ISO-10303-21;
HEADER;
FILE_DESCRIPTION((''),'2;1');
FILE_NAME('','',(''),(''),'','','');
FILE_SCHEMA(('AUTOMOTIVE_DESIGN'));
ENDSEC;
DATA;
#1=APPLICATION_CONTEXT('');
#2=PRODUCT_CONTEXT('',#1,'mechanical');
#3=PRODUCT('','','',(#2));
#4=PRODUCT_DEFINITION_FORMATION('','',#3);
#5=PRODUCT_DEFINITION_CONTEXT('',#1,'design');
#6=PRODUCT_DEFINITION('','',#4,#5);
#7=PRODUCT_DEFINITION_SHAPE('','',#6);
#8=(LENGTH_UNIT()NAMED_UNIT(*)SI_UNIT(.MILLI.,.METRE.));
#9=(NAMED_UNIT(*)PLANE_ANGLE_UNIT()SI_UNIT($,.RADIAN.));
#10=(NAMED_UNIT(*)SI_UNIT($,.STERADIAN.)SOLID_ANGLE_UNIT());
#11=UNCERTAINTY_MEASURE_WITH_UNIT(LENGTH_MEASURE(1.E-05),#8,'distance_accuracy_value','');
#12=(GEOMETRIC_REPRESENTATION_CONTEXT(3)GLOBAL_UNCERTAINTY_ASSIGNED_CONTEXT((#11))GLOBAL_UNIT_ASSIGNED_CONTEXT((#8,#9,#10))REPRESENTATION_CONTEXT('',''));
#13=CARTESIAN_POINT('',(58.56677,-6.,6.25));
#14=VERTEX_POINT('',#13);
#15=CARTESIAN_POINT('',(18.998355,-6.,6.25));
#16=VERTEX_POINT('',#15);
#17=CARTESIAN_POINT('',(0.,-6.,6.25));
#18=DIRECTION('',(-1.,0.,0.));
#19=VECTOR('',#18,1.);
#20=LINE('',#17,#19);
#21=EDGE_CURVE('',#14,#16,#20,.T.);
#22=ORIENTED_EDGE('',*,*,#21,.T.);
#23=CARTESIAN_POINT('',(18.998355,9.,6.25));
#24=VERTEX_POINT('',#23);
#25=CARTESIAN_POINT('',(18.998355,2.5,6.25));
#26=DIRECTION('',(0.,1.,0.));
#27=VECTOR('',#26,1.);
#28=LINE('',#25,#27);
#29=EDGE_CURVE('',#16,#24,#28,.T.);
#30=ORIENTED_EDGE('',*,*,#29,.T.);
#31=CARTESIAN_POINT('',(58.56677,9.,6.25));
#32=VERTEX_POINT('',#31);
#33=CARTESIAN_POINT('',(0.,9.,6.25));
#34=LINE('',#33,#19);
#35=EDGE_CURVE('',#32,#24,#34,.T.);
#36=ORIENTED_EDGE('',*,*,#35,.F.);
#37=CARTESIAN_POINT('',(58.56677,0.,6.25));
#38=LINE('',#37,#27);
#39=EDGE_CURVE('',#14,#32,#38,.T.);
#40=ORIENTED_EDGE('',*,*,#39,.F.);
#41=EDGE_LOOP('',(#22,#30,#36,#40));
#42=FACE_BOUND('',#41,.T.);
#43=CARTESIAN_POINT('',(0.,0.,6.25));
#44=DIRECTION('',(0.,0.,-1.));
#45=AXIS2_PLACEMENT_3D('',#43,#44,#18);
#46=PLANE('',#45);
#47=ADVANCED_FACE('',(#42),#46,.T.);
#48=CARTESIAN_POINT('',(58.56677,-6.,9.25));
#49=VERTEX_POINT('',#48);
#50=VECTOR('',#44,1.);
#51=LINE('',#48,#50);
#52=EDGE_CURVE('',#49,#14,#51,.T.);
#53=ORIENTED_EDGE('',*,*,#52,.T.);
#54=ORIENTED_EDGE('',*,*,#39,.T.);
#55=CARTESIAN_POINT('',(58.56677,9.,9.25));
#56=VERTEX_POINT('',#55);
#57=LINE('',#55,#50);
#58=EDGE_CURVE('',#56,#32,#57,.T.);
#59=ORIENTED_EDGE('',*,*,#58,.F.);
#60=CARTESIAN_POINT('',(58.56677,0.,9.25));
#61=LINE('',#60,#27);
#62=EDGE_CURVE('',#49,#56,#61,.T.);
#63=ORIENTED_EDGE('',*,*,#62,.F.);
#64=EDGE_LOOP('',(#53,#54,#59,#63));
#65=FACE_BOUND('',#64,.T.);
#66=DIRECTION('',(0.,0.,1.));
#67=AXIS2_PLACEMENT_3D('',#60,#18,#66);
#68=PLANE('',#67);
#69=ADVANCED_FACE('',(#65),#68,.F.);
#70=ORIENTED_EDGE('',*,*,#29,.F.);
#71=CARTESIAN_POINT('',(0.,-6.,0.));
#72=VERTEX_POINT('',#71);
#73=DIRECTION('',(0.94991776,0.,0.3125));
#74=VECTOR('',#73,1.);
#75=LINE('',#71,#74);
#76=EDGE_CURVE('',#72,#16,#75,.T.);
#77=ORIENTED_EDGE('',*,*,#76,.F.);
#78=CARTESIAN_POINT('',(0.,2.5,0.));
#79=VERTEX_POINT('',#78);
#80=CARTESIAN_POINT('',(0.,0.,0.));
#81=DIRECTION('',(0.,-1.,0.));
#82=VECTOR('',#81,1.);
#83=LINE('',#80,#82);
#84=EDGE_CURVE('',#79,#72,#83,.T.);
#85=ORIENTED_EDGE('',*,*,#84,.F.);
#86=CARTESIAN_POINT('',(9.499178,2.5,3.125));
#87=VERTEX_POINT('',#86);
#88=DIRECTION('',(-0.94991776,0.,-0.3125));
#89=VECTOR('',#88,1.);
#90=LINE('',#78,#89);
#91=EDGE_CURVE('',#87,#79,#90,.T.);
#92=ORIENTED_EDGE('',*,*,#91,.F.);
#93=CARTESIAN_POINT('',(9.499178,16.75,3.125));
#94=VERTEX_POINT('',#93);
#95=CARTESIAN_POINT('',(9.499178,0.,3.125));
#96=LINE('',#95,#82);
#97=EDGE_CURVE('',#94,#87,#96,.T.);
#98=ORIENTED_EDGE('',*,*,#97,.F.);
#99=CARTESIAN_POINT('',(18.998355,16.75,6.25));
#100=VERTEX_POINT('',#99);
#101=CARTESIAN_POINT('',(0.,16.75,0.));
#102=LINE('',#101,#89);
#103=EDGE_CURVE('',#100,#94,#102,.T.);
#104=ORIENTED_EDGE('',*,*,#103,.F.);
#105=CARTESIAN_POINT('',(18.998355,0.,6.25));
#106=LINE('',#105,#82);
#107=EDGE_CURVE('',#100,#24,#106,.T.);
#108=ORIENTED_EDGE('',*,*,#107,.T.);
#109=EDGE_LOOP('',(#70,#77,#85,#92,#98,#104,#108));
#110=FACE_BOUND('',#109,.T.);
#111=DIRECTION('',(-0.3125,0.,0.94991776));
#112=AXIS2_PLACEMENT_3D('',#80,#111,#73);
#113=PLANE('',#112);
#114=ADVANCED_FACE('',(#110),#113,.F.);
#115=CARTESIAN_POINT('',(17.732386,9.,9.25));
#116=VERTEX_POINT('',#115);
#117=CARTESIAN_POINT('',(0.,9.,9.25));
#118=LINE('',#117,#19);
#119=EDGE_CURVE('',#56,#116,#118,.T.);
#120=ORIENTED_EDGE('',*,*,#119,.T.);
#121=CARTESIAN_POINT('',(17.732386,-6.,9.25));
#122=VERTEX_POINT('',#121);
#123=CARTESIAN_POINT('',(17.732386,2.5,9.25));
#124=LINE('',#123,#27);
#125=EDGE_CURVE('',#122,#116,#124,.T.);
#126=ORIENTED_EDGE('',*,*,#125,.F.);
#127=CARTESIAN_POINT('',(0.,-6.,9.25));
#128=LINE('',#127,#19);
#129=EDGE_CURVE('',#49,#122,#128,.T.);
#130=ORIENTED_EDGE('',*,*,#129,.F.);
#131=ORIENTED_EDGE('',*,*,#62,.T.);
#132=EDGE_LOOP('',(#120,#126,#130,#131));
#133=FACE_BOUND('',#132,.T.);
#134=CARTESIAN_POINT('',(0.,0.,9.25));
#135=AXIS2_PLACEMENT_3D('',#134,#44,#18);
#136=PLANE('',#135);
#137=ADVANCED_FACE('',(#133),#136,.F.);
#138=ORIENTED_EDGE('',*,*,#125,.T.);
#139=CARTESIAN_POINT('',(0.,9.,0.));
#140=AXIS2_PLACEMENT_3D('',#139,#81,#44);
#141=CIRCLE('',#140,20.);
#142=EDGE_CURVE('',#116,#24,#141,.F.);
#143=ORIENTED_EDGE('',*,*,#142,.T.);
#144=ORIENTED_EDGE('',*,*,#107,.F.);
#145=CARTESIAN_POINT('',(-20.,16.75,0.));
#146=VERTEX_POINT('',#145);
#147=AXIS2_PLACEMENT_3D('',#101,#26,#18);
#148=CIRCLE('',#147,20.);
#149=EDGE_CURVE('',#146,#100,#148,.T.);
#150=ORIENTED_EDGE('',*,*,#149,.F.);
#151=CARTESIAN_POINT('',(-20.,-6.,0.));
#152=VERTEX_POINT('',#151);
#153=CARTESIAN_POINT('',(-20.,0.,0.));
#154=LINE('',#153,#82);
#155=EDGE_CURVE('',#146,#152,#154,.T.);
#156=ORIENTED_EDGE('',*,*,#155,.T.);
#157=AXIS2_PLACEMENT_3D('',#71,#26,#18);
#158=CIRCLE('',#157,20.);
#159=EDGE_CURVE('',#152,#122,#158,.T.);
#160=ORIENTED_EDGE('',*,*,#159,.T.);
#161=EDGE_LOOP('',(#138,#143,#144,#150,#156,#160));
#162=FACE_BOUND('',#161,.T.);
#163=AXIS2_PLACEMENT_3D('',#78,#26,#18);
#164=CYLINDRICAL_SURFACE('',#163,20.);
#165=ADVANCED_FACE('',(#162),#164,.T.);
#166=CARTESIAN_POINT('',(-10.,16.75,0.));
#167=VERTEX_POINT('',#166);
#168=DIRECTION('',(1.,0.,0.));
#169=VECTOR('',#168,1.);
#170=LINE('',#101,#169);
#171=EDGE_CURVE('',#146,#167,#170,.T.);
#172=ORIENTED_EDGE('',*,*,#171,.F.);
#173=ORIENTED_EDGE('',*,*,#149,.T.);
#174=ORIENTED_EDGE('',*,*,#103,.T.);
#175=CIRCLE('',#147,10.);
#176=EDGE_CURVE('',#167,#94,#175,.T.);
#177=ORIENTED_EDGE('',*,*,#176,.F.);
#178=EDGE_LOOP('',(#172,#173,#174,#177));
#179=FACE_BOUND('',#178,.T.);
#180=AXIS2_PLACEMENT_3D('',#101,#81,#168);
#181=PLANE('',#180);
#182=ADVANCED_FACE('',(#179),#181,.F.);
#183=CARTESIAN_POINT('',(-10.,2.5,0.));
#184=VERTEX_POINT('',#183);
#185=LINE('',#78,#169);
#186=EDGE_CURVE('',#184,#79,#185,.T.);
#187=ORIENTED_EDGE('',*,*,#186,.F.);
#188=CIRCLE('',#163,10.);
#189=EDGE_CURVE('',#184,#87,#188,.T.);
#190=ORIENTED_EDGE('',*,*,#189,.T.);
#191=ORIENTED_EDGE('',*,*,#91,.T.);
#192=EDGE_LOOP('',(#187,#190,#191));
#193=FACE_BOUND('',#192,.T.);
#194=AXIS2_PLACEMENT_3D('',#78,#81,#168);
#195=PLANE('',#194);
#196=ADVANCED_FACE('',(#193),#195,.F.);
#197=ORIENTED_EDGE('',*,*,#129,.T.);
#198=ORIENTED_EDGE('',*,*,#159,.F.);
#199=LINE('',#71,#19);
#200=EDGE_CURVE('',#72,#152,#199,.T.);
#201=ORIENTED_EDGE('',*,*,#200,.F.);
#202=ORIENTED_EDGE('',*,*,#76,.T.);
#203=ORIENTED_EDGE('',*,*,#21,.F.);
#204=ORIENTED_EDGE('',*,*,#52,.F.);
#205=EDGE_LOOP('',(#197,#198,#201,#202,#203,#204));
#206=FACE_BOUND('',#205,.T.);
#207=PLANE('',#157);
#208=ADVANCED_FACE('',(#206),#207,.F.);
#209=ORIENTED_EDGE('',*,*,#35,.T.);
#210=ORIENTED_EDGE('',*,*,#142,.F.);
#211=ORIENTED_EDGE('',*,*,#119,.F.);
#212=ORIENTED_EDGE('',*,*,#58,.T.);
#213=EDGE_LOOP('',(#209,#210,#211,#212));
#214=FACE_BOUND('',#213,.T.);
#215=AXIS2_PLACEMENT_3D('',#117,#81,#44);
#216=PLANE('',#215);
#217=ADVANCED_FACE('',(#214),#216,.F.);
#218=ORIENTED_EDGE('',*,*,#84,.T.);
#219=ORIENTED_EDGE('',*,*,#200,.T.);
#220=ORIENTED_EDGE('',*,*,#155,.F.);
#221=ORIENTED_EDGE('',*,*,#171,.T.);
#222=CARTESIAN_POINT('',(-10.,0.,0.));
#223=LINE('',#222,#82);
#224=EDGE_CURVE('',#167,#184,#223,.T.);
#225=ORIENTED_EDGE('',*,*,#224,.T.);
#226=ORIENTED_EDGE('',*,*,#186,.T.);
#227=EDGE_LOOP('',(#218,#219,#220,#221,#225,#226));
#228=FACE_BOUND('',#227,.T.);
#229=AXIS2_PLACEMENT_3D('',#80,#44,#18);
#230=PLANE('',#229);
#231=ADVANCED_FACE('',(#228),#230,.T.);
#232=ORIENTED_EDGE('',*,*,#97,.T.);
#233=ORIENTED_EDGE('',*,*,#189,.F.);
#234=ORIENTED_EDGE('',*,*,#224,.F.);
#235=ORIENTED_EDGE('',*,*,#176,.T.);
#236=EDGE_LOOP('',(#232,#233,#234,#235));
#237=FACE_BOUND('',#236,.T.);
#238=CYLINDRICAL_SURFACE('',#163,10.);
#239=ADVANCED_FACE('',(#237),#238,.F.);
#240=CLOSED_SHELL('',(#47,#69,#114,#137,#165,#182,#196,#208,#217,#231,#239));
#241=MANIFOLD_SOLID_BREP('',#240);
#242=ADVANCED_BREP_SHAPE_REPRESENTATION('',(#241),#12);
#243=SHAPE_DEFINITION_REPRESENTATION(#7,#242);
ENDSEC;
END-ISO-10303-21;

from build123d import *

# Parameters (mm, degrees)
SKETCH1_W              = 2.756398936
SKETCH1_H              = 15
REVOLVE2_ANGLE         = 180
BOSS_EXTRUDE1_START    = 6.25
SKETCH1_7_W            = 41.323169176
SKETCH1_7_H            = 15
BOSS_EXTRUDE1_DEPTH    = 3
CUT_REVOLVE2_START     = -9.499177596
CUT_REVOLVE2_OUTLINE_W = 22.75
CUT_REVOLVE2_OUTLINE_H = 7
CUT_REVOLVE2_DEPTH     = 29.499177596


with BuildPart() as part:
    # Sketch1 → Revolve2 (revolve)
    with BuildSketch(Plane.XY):
        Polygon((17.243601064, 9), (20, 9), (20, 16.75), (10, 16.75), (10, 2.5), (0, 2.5), (0, -6), (17.243601064, -6), align=None)
        with Locations((18.621800532, 1.5)):
            Rectangle(SKETCH1_W, SKETCH1_H)
    revolve(axis=Axis((0, 2.5, 0), (0, -1, 0)), revolution_arc=REVOLVE2_ANGLE)

    # Sketch1<7> → Boss-Extrude1 (add)
    with BuildSketch(Plane.XY.offset(BOSS_EXTRUDE1_START)):
        with Locations((37.905185652, 1.5)):
            Rectangle(SKETCH1_7_W, SKETCH1_7_H)
    extrude(amount=BOSS_EXTRUDE1_DEPTH)

    # Cut-Revolve2: read off the stored shape, not the designer's step
    # Cut-Revolve2 outline → Cut-Revolve2 (cut)
    with BuildSketch(Plane(origin=(0, 0, 0), x_dir=(0, 1, 0), z_dir=(0.9499177595981665, 0, 0.31250000000000017)).offset(CUT_REVOLVE2_START)):
        with Locations((5.375, -3.5)):
            Rectangle(CUT_REVOLVE2_OUTLINE_W, CUT_REVOLVE2_OUTLINE_H)
    extrude(amount=CUT_REVOLVE2_DEPTH, mode=Mode.SUBTRACT)


solid = part.part
